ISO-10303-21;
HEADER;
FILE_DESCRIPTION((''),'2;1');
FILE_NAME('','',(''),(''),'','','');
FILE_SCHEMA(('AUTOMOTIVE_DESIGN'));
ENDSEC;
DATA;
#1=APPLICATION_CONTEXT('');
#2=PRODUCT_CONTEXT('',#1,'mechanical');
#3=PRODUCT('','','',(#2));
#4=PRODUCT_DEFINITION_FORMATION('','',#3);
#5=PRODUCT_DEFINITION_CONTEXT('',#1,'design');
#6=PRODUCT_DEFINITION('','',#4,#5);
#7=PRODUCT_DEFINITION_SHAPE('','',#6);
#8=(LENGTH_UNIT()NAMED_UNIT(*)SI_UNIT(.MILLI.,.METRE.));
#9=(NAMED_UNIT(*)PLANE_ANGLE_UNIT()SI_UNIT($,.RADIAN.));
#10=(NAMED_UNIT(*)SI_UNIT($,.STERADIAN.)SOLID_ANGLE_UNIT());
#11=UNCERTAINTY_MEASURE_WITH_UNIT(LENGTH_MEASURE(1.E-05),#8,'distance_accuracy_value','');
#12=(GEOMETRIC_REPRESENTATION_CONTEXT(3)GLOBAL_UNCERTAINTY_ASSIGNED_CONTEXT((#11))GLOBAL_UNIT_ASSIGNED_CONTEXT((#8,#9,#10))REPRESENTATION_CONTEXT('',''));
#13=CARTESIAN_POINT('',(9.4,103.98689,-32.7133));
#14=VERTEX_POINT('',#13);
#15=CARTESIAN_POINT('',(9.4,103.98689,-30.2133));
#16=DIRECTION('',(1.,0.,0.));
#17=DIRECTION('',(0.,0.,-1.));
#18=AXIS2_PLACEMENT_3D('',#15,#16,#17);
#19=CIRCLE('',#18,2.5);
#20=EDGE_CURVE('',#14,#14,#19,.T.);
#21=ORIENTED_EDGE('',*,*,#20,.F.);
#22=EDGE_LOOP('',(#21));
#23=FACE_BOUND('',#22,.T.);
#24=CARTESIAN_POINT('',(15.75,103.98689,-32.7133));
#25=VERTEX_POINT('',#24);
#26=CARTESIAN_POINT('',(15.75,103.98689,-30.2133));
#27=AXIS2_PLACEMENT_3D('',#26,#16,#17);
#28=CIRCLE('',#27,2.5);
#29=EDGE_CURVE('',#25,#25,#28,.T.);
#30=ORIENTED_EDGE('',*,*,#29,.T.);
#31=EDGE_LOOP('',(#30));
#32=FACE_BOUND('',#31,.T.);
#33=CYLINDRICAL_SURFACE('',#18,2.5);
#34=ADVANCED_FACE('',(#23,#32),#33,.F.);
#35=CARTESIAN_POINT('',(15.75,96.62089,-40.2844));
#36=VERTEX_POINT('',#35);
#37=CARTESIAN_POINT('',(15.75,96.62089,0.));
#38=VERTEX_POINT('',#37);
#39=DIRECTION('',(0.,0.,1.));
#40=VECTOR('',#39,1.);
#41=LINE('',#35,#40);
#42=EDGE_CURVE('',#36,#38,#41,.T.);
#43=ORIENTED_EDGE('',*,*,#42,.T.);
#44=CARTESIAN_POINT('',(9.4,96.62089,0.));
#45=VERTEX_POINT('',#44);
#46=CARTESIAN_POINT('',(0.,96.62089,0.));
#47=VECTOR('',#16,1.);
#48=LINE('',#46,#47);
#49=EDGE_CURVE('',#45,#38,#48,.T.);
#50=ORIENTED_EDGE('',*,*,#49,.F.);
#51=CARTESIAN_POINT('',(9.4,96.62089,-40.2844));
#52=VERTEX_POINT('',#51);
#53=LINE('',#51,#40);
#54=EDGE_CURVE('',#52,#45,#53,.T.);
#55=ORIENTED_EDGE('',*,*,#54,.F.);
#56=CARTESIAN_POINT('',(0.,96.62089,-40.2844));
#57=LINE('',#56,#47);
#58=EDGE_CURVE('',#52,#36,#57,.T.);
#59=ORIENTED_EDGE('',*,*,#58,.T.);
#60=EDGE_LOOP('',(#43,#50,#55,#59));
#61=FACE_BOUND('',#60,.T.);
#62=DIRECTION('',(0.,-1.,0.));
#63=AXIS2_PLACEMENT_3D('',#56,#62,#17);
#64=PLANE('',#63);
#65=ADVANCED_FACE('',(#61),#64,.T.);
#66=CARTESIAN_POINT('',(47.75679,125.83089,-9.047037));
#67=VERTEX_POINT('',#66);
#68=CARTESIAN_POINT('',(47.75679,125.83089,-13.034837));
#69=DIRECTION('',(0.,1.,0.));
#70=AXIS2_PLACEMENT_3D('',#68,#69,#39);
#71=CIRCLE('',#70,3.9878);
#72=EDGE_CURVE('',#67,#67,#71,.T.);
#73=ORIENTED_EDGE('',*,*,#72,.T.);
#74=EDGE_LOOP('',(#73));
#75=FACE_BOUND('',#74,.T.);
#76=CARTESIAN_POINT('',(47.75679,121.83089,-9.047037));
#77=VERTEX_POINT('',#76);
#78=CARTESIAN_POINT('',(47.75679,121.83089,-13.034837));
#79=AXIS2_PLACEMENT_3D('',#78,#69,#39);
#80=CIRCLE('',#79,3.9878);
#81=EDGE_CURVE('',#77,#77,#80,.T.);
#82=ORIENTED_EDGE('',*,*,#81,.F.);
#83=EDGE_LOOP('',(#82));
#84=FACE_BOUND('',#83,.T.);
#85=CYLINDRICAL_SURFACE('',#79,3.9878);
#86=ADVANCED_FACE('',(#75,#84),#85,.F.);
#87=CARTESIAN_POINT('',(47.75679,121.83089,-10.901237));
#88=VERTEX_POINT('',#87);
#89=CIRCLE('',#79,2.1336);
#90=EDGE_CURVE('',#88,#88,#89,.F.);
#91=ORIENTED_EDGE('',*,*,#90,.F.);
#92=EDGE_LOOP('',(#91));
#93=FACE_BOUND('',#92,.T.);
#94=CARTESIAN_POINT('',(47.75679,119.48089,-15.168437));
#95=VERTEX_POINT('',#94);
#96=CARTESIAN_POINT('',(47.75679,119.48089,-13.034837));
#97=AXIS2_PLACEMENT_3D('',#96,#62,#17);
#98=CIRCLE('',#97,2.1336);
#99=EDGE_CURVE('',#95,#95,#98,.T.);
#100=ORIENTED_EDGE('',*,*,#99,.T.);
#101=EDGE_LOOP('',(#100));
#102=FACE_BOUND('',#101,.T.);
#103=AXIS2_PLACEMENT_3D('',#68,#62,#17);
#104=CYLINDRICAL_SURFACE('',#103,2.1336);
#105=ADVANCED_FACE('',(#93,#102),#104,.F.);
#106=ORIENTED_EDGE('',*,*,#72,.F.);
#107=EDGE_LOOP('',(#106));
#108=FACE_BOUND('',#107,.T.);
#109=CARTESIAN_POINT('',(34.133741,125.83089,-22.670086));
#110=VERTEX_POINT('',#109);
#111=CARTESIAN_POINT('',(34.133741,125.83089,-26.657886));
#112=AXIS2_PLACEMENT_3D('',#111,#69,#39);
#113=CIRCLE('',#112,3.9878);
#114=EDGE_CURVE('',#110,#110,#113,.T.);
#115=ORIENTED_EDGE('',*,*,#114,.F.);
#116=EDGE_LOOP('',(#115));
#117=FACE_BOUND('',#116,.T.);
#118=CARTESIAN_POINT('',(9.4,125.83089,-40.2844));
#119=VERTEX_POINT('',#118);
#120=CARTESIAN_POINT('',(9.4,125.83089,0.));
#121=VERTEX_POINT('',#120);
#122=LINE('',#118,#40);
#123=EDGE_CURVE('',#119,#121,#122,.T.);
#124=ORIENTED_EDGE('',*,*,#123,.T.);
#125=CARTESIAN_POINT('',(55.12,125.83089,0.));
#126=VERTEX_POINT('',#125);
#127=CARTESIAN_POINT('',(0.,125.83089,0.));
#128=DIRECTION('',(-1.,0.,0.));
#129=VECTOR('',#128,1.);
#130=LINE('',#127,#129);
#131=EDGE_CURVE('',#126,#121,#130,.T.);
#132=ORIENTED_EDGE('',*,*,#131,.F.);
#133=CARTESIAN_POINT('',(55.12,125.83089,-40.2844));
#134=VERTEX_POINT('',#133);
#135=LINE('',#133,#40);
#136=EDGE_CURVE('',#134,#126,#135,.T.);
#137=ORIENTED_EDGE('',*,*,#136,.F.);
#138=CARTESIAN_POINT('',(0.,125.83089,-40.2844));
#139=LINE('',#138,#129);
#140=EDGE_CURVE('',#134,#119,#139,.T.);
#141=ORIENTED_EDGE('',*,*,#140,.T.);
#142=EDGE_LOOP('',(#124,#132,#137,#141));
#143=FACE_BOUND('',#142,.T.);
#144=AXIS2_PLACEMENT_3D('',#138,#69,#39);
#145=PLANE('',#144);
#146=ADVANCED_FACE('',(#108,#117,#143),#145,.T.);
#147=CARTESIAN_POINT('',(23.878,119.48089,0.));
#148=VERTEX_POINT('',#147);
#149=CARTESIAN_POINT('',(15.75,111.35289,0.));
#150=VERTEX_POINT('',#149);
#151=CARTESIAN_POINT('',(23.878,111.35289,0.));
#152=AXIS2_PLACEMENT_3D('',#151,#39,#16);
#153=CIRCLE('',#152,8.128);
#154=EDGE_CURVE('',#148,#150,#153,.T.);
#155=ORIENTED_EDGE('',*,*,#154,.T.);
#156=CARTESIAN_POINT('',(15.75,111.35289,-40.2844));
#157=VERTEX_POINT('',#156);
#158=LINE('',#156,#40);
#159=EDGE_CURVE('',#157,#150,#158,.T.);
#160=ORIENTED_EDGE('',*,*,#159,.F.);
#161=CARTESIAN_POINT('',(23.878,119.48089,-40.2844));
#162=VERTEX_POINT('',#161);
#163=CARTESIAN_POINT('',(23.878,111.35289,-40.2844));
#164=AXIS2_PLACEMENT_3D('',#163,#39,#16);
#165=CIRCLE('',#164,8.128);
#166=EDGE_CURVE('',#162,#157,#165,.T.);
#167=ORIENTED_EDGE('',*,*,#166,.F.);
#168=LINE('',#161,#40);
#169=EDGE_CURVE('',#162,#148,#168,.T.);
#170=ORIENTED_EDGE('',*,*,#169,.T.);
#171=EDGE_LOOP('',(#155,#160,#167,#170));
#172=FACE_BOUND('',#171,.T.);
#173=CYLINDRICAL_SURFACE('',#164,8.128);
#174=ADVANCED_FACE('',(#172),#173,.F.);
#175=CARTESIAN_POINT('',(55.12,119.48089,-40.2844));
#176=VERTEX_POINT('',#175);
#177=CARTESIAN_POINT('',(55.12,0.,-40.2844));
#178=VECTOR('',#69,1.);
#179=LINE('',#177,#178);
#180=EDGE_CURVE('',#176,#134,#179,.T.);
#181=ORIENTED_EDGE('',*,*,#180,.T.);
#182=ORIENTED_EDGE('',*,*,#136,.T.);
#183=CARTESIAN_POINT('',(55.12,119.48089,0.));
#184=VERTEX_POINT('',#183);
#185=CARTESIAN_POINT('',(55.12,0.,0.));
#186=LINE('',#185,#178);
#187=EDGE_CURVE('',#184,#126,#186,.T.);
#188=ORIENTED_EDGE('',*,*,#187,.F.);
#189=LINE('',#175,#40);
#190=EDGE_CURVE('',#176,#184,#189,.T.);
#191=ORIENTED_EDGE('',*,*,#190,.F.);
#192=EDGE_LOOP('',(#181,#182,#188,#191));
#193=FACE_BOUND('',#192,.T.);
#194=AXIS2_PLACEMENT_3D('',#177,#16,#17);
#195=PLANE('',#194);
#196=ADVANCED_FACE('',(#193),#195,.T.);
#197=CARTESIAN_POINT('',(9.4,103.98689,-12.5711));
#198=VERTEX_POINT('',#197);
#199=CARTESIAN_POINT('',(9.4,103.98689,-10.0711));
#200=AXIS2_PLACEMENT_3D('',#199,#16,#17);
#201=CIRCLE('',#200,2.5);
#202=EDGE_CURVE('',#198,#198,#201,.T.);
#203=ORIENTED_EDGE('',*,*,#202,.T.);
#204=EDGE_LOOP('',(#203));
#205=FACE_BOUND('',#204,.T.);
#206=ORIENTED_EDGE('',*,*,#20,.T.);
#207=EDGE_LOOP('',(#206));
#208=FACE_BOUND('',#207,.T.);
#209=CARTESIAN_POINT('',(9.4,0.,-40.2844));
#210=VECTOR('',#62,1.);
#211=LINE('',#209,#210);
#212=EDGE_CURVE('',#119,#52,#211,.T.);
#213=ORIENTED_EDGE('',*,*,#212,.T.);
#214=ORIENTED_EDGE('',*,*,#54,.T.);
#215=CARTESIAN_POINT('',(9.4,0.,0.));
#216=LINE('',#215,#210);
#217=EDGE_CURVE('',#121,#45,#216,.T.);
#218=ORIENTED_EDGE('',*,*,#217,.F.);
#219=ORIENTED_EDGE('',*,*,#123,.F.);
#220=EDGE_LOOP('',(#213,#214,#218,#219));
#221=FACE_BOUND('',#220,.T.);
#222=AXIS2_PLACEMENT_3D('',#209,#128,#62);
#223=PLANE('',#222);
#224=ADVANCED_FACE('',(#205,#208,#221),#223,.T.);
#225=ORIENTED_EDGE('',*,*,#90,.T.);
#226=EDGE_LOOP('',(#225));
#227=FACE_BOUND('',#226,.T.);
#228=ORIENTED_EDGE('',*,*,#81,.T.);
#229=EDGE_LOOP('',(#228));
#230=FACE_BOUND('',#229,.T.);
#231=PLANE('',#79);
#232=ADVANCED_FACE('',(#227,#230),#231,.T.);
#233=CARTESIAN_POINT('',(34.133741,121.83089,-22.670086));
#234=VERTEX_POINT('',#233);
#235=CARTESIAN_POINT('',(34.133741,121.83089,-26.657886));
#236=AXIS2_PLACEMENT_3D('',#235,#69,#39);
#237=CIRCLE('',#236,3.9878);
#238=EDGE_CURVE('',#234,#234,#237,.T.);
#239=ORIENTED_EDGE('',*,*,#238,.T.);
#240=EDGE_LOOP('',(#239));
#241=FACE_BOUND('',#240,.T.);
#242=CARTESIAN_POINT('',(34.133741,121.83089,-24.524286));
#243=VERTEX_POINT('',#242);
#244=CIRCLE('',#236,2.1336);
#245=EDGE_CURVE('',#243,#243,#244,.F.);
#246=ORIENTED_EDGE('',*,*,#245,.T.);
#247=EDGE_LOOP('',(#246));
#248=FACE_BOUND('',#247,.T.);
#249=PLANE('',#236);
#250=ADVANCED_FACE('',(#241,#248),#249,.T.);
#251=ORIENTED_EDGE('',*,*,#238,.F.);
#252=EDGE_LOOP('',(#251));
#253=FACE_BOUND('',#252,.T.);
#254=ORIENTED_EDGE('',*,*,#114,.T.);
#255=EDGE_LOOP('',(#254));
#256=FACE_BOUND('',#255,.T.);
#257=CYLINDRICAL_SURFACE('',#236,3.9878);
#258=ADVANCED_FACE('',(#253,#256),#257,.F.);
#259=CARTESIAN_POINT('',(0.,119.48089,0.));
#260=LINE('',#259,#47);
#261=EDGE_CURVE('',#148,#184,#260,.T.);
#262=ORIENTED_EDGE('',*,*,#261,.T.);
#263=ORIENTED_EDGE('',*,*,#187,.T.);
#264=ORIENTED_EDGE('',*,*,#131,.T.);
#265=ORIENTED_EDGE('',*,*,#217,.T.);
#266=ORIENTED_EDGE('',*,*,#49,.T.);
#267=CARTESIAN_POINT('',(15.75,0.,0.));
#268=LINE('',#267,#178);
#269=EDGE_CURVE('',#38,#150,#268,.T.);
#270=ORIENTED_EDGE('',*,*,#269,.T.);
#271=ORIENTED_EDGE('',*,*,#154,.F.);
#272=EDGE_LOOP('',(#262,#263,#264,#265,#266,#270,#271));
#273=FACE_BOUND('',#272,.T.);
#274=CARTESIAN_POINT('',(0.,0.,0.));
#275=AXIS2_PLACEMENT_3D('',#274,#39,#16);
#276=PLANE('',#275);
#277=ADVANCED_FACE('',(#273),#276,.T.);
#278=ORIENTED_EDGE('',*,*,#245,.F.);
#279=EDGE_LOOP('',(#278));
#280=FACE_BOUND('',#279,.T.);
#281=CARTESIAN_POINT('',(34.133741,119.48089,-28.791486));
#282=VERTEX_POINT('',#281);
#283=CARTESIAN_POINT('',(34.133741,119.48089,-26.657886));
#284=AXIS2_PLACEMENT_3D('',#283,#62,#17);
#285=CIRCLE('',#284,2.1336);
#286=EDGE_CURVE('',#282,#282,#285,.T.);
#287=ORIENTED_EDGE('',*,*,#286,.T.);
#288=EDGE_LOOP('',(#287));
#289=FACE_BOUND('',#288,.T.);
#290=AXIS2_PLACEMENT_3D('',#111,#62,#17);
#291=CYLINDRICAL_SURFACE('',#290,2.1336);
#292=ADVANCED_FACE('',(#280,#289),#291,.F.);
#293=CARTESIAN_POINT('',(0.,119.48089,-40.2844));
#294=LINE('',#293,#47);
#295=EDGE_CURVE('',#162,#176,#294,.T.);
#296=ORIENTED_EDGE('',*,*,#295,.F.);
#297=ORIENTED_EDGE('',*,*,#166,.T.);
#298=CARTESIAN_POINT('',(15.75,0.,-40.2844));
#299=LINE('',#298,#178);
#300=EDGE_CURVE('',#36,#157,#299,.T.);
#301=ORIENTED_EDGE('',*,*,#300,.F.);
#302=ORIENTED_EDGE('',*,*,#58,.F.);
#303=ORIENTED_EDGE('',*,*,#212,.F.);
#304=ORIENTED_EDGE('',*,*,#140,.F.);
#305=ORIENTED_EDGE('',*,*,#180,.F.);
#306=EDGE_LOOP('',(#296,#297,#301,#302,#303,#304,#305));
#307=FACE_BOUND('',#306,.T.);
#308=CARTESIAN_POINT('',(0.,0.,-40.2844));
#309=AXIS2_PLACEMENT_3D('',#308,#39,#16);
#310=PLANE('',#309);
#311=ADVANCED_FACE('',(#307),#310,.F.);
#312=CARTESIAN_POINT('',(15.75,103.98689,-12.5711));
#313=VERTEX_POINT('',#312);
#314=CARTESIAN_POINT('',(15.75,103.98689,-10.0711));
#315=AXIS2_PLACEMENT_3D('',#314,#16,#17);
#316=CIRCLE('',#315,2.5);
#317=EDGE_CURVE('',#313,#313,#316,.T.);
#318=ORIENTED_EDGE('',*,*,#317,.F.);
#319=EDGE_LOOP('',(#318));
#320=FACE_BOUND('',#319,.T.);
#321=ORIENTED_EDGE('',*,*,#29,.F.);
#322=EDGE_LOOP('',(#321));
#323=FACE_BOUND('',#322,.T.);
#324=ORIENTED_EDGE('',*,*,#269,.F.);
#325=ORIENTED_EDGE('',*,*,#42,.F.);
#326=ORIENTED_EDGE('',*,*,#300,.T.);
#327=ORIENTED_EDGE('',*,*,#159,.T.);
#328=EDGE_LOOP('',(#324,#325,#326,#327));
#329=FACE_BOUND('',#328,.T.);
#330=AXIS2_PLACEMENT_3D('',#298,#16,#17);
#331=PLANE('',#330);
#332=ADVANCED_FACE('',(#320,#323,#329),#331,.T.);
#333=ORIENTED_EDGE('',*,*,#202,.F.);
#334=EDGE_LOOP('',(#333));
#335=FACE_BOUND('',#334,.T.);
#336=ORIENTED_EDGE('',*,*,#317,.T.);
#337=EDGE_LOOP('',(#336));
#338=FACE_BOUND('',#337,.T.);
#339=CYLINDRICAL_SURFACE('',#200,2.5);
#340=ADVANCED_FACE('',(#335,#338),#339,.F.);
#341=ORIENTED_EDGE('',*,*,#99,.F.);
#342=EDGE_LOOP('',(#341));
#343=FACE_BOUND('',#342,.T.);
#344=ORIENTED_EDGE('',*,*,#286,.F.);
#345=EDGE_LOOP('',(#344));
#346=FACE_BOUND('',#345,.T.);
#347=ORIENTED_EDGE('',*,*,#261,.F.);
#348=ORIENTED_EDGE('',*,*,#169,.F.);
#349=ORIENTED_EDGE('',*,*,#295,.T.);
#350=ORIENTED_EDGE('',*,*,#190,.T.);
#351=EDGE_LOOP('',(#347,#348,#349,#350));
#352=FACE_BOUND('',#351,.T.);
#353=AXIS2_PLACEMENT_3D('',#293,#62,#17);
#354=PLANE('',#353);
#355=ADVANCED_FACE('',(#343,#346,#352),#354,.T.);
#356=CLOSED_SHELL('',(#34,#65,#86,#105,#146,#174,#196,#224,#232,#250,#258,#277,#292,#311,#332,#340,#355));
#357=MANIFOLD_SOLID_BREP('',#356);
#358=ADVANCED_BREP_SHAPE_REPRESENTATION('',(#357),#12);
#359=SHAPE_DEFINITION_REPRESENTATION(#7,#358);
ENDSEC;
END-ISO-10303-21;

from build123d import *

# Parameters (mm, degrees)
BOSS_EXTRUDE1_DEPTH = 40.2844
SKETCH2_R           = 2.1336
CUT_EXTRUDE1_DEPTH  = 72.997408866
SKETCH3_R           = 3.9878
CUT_EXTRUDE2_DEPTH  = 4
SKETCH4_R           = 2.5
CUT_EXTRUDE3_DEPTH  = 138.863130215


with BuildPart() as part:
    # Sketch1 → Boss-Extrude1 (new body)
    with BuildSketch(Plane.XY):
        with BuildLine():
            Line((55.12, 125.830890045), (9.4, 125.830890045))
            Line((9.4, 125.830890045), (9.4, 96.620890045))
            Line((9.4, 96.620890045), (15.75, 96.620890045))
            Line((15.75, 96.620890045), (15.75, 111.352890045))
            ThreePointArc((15.75, 111.352890045), (18.130636083, 117.100253962), (23.878, 119.480890045))
            Line((23.878, 119.480890045), (55.12, 119.480890045))
            Line((55.12, 119.480890045), (55.12, 125.830890045))
        make_face()
    extrude(amount=-BOSS_EXTRUDE1_DEPTH)

    # Sketch2 → Cut-Extrude1 (cut, through all)
    with BuildSketch(Plane(origin=(0, 119.480890045, 0), x_dir=(-1, 0, 0), z_dir=(0, -1, 0))):
        with Locations((-47.756789836, 13.03483709)):
            Circle(SKETCH2_R)
        with Locations((-34.133741301, 26.657885626)):
            Circle(SKETCH2_R)
    extrude(amount=-CUT_EXTRUDE1_DEPTH, mode=Mode.SUBTRACT)

    # Sketch3 → Cut-Extrude2 (cut)
    with BuildSketch(Plane(origin=(0, 125.830890045, 0), x_dir=(1, 0, 0), z_dir=(0, 1, 0))):
        with Locations((47.756789836, 13.03483709)):
            Circle(SKETCH3_R)
        with Locations((34.133741301, 26.657885626)):
            Circle(SKETCH3_R)
    extrude(amount=-CUT_EXTRUDE2_DEPTH, mode=Mode.SUBTRACT)

    # Sketch4 → Cut-Extrude3 (cut, through all)
    with BuildSketch(Plane(origin=(15.75, 0, 0), x_dir=(0, 0, -1), z_dir=(1, 0, 0))):
        with Locations((10.0711, 103.986890045)):
            Circle(SKETCH4_R)
        with Locations((30.2133, 103.986890045)):
            Circle(SKETCH4_R)
    extrude(amount=-CUT_EXTRUDE3_DEPTH, mode=Mode.SUBTRACT)


solid = part.part
